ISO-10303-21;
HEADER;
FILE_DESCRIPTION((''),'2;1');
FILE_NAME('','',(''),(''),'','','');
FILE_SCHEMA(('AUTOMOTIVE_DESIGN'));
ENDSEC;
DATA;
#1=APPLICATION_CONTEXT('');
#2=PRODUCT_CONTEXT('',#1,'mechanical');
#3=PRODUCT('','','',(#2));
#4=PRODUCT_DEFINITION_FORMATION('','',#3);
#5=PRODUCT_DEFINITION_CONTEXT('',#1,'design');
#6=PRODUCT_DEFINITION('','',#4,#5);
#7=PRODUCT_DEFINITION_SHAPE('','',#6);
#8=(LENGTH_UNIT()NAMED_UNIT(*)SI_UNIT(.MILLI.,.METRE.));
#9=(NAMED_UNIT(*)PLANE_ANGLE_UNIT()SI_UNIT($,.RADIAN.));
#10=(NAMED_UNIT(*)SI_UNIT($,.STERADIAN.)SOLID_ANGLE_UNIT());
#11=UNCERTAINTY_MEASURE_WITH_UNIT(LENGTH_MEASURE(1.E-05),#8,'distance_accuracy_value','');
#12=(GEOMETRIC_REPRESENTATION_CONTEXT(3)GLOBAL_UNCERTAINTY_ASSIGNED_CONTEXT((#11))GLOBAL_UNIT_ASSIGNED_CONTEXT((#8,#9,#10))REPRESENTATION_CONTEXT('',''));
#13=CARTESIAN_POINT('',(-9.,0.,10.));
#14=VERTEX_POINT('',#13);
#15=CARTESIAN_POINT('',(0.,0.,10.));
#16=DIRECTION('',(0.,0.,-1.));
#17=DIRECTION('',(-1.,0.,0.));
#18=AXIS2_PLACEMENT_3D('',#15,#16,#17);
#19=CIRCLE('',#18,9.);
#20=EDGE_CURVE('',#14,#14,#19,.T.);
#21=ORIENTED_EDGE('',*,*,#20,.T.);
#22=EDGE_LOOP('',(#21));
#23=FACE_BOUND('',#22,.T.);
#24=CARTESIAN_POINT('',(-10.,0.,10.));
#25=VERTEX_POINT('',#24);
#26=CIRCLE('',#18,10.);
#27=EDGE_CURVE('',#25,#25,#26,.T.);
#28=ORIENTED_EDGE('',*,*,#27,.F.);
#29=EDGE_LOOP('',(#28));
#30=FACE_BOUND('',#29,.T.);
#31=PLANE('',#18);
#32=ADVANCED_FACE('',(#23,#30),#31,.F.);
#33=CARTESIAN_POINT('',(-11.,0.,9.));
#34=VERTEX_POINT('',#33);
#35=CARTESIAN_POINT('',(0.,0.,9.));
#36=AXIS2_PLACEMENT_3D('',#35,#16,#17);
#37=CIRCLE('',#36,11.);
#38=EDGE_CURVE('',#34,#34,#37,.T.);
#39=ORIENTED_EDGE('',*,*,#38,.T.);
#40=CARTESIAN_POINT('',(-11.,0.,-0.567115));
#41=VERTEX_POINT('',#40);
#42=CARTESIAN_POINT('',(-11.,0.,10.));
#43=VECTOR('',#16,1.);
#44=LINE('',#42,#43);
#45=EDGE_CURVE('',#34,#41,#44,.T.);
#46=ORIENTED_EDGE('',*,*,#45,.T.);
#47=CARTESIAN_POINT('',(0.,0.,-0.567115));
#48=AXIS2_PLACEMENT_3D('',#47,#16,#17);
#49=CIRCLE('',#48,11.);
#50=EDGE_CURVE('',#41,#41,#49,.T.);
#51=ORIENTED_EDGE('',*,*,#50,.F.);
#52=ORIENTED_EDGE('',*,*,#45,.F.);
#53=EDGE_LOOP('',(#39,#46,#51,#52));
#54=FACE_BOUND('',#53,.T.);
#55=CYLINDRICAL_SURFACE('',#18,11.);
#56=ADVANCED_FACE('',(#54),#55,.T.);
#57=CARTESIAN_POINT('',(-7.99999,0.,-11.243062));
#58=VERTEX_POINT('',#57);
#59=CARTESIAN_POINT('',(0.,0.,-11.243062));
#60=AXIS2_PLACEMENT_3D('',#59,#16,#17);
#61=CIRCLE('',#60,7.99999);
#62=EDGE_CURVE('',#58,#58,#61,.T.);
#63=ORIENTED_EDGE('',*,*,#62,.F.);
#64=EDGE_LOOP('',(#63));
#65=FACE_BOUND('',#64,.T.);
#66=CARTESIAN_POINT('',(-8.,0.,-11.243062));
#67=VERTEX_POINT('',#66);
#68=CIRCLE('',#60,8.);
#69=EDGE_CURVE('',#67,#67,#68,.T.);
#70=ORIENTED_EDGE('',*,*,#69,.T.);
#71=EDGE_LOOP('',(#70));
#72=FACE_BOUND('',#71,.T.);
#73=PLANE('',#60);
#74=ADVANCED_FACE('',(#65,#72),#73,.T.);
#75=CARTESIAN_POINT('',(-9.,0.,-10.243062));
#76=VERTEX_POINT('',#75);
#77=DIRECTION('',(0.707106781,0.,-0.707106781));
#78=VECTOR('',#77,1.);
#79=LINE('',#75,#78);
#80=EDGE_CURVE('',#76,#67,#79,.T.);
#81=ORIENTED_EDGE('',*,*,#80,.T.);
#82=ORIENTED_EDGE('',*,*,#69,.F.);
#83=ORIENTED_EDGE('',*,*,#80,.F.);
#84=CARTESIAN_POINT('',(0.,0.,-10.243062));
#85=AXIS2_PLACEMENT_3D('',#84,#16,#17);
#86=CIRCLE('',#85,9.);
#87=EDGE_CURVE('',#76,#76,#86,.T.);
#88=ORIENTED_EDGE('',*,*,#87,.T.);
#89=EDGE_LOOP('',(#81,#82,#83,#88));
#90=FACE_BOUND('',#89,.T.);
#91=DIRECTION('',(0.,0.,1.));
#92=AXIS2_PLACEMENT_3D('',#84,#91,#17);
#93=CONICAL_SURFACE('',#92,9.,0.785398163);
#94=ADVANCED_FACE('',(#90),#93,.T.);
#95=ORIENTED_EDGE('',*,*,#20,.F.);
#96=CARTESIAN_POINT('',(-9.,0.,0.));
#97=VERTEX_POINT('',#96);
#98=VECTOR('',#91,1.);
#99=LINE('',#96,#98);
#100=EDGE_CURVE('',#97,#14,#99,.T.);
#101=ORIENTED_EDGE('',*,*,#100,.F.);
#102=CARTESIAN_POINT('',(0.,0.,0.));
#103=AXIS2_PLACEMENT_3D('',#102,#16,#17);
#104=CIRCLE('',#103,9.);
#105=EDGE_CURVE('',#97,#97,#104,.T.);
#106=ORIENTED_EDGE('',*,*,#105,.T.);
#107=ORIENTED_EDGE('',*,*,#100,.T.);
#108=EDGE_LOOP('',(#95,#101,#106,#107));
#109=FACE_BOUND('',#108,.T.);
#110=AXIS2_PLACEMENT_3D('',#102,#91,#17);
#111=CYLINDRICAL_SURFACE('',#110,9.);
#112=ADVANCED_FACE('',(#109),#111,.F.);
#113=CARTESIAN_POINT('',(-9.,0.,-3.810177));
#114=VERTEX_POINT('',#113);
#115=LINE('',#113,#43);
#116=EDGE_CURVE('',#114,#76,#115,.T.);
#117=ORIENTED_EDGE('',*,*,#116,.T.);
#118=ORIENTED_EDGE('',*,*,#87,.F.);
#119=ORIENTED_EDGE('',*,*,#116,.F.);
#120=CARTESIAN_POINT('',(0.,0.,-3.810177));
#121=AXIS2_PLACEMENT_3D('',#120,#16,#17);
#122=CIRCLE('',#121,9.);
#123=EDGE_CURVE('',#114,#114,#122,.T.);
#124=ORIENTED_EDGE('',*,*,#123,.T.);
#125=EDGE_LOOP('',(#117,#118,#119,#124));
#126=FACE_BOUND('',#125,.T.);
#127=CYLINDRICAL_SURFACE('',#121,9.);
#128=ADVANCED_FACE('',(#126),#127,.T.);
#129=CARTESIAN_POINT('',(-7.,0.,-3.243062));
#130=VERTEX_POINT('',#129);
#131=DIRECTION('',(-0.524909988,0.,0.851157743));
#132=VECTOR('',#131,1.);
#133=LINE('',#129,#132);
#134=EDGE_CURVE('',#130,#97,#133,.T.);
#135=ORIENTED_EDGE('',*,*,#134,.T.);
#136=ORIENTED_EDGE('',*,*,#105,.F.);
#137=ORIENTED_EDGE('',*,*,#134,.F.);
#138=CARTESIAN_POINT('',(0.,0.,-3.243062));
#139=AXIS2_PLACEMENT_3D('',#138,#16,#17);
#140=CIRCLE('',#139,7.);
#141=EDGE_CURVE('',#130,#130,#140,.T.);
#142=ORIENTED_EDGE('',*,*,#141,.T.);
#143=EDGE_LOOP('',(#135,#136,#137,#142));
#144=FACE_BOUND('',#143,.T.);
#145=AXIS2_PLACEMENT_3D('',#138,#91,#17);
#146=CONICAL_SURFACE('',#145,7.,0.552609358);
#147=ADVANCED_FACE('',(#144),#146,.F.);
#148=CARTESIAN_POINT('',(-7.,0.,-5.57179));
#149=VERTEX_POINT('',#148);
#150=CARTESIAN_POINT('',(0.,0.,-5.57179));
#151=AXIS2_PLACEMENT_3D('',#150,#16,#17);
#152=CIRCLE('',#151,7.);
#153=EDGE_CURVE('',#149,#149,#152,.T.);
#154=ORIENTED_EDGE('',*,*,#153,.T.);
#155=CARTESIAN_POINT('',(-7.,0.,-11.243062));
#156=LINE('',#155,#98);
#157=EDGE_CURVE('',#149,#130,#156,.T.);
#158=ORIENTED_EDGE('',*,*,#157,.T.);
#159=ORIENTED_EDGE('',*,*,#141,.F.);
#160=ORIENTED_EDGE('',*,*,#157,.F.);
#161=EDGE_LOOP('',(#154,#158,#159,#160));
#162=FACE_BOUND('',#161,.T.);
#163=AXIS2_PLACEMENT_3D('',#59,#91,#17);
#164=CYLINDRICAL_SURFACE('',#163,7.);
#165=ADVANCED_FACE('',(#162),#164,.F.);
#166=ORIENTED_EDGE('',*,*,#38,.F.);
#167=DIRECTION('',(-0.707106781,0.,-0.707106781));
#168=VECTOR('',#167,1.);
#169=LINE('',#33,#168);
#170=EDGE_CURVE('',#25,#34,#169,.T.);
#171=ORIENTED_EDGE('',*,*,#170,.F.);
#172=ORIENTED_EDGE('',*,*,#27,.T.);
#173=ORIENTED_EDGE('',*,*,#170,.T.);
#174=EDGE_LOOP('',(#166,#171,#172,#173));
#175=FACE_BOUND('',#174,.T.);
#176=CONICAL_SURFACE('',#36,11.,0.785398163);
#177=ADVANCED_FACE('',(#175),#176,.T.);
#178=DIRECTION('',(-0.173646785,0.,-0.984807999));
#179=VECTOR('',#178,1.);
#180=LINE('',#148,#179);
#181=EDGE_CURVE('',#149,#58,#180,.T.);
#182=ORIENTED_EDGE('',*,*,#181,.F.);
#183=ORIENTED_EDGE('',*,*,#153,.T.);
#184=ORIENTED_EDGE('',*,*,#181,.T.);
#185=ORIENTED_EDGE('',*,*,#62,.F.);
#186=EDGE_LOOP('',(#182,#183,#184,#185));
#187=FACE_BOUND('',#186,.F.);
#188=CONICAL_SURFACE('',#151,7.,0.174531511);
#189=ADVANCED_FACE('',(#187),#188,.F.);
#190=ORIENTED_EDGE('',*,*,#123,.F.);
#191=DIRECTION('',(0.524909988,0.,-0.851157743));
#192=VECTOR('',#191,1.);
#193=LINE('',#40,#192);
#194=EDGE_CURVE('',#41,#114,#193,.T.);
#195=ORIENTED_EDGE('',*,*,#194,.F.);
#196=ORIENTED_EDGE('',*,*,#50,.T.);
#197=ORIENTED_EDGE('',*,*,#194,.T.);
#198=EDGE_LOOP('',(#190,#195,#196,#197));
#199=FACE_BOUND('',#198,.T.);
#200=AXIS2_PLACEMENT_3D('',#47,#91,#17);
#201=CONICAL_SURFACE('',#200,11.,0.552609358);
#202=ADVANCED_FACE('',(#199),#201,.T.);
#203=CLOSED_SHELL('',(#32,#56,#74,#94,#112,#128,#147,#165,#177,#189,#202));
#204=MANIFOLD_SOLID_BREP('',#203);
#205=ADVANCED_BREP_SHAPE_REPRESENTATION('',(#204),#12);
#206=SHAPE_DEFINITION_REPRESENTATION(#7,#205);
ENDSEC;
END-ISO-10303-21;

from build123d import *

# Parameters (mm, degrees)
F2_SIZE2 = 1
F2_SIZE  = 1
F3_SIZE2 = 0.99999
F3_SIZE  = 5.671272


# Not quite as in the source:
# - a fillet or chamfer is up to 0.001 mm smaller than in the source, because OpenCascade refuses the exact size


with BuildPart() as f1:
    # F0 (on Front) → F1 (revolve)
    with BuildSketch(Plane.XZ):
        Polygon((-9, 0), (-9, 10), (-11, 10), (-11, -0.5671153529), (-9, -3.8101770668), (-9, -11.2430617139), (-7, -11.2430617139), (-7, -3.2430617139), align=None)
    revolve(axis=Axis((0, 0, -1.2268370084), (0, 0, -1)))

    # F2
    f2_edges = [f1.edges().sort_by_distance(p)[0] for p in [
        (9, 0, -11.243062),
        (11, 0, 10),
    ]]
    chamfer(f2_edges, length=F2_SIZE, length2=F2_SIZE2)

    # F3 (size 5.6712818196 and 1 in the source; OpenCascade refuses exactly that, so slightly less here)
    f3_edges = [f1.edges().sort_by_distance(p)[0] for p in [
        (7, 0, -11.243062),
    ]]
    f3_side = f1.faces().sort_by_distance((7, 0, -7.243062))[0]
    chamfer(f3_edges, length=F3_SIZE, length2=F3_SIZE2, reference=f3_side)


solid = f1.part
